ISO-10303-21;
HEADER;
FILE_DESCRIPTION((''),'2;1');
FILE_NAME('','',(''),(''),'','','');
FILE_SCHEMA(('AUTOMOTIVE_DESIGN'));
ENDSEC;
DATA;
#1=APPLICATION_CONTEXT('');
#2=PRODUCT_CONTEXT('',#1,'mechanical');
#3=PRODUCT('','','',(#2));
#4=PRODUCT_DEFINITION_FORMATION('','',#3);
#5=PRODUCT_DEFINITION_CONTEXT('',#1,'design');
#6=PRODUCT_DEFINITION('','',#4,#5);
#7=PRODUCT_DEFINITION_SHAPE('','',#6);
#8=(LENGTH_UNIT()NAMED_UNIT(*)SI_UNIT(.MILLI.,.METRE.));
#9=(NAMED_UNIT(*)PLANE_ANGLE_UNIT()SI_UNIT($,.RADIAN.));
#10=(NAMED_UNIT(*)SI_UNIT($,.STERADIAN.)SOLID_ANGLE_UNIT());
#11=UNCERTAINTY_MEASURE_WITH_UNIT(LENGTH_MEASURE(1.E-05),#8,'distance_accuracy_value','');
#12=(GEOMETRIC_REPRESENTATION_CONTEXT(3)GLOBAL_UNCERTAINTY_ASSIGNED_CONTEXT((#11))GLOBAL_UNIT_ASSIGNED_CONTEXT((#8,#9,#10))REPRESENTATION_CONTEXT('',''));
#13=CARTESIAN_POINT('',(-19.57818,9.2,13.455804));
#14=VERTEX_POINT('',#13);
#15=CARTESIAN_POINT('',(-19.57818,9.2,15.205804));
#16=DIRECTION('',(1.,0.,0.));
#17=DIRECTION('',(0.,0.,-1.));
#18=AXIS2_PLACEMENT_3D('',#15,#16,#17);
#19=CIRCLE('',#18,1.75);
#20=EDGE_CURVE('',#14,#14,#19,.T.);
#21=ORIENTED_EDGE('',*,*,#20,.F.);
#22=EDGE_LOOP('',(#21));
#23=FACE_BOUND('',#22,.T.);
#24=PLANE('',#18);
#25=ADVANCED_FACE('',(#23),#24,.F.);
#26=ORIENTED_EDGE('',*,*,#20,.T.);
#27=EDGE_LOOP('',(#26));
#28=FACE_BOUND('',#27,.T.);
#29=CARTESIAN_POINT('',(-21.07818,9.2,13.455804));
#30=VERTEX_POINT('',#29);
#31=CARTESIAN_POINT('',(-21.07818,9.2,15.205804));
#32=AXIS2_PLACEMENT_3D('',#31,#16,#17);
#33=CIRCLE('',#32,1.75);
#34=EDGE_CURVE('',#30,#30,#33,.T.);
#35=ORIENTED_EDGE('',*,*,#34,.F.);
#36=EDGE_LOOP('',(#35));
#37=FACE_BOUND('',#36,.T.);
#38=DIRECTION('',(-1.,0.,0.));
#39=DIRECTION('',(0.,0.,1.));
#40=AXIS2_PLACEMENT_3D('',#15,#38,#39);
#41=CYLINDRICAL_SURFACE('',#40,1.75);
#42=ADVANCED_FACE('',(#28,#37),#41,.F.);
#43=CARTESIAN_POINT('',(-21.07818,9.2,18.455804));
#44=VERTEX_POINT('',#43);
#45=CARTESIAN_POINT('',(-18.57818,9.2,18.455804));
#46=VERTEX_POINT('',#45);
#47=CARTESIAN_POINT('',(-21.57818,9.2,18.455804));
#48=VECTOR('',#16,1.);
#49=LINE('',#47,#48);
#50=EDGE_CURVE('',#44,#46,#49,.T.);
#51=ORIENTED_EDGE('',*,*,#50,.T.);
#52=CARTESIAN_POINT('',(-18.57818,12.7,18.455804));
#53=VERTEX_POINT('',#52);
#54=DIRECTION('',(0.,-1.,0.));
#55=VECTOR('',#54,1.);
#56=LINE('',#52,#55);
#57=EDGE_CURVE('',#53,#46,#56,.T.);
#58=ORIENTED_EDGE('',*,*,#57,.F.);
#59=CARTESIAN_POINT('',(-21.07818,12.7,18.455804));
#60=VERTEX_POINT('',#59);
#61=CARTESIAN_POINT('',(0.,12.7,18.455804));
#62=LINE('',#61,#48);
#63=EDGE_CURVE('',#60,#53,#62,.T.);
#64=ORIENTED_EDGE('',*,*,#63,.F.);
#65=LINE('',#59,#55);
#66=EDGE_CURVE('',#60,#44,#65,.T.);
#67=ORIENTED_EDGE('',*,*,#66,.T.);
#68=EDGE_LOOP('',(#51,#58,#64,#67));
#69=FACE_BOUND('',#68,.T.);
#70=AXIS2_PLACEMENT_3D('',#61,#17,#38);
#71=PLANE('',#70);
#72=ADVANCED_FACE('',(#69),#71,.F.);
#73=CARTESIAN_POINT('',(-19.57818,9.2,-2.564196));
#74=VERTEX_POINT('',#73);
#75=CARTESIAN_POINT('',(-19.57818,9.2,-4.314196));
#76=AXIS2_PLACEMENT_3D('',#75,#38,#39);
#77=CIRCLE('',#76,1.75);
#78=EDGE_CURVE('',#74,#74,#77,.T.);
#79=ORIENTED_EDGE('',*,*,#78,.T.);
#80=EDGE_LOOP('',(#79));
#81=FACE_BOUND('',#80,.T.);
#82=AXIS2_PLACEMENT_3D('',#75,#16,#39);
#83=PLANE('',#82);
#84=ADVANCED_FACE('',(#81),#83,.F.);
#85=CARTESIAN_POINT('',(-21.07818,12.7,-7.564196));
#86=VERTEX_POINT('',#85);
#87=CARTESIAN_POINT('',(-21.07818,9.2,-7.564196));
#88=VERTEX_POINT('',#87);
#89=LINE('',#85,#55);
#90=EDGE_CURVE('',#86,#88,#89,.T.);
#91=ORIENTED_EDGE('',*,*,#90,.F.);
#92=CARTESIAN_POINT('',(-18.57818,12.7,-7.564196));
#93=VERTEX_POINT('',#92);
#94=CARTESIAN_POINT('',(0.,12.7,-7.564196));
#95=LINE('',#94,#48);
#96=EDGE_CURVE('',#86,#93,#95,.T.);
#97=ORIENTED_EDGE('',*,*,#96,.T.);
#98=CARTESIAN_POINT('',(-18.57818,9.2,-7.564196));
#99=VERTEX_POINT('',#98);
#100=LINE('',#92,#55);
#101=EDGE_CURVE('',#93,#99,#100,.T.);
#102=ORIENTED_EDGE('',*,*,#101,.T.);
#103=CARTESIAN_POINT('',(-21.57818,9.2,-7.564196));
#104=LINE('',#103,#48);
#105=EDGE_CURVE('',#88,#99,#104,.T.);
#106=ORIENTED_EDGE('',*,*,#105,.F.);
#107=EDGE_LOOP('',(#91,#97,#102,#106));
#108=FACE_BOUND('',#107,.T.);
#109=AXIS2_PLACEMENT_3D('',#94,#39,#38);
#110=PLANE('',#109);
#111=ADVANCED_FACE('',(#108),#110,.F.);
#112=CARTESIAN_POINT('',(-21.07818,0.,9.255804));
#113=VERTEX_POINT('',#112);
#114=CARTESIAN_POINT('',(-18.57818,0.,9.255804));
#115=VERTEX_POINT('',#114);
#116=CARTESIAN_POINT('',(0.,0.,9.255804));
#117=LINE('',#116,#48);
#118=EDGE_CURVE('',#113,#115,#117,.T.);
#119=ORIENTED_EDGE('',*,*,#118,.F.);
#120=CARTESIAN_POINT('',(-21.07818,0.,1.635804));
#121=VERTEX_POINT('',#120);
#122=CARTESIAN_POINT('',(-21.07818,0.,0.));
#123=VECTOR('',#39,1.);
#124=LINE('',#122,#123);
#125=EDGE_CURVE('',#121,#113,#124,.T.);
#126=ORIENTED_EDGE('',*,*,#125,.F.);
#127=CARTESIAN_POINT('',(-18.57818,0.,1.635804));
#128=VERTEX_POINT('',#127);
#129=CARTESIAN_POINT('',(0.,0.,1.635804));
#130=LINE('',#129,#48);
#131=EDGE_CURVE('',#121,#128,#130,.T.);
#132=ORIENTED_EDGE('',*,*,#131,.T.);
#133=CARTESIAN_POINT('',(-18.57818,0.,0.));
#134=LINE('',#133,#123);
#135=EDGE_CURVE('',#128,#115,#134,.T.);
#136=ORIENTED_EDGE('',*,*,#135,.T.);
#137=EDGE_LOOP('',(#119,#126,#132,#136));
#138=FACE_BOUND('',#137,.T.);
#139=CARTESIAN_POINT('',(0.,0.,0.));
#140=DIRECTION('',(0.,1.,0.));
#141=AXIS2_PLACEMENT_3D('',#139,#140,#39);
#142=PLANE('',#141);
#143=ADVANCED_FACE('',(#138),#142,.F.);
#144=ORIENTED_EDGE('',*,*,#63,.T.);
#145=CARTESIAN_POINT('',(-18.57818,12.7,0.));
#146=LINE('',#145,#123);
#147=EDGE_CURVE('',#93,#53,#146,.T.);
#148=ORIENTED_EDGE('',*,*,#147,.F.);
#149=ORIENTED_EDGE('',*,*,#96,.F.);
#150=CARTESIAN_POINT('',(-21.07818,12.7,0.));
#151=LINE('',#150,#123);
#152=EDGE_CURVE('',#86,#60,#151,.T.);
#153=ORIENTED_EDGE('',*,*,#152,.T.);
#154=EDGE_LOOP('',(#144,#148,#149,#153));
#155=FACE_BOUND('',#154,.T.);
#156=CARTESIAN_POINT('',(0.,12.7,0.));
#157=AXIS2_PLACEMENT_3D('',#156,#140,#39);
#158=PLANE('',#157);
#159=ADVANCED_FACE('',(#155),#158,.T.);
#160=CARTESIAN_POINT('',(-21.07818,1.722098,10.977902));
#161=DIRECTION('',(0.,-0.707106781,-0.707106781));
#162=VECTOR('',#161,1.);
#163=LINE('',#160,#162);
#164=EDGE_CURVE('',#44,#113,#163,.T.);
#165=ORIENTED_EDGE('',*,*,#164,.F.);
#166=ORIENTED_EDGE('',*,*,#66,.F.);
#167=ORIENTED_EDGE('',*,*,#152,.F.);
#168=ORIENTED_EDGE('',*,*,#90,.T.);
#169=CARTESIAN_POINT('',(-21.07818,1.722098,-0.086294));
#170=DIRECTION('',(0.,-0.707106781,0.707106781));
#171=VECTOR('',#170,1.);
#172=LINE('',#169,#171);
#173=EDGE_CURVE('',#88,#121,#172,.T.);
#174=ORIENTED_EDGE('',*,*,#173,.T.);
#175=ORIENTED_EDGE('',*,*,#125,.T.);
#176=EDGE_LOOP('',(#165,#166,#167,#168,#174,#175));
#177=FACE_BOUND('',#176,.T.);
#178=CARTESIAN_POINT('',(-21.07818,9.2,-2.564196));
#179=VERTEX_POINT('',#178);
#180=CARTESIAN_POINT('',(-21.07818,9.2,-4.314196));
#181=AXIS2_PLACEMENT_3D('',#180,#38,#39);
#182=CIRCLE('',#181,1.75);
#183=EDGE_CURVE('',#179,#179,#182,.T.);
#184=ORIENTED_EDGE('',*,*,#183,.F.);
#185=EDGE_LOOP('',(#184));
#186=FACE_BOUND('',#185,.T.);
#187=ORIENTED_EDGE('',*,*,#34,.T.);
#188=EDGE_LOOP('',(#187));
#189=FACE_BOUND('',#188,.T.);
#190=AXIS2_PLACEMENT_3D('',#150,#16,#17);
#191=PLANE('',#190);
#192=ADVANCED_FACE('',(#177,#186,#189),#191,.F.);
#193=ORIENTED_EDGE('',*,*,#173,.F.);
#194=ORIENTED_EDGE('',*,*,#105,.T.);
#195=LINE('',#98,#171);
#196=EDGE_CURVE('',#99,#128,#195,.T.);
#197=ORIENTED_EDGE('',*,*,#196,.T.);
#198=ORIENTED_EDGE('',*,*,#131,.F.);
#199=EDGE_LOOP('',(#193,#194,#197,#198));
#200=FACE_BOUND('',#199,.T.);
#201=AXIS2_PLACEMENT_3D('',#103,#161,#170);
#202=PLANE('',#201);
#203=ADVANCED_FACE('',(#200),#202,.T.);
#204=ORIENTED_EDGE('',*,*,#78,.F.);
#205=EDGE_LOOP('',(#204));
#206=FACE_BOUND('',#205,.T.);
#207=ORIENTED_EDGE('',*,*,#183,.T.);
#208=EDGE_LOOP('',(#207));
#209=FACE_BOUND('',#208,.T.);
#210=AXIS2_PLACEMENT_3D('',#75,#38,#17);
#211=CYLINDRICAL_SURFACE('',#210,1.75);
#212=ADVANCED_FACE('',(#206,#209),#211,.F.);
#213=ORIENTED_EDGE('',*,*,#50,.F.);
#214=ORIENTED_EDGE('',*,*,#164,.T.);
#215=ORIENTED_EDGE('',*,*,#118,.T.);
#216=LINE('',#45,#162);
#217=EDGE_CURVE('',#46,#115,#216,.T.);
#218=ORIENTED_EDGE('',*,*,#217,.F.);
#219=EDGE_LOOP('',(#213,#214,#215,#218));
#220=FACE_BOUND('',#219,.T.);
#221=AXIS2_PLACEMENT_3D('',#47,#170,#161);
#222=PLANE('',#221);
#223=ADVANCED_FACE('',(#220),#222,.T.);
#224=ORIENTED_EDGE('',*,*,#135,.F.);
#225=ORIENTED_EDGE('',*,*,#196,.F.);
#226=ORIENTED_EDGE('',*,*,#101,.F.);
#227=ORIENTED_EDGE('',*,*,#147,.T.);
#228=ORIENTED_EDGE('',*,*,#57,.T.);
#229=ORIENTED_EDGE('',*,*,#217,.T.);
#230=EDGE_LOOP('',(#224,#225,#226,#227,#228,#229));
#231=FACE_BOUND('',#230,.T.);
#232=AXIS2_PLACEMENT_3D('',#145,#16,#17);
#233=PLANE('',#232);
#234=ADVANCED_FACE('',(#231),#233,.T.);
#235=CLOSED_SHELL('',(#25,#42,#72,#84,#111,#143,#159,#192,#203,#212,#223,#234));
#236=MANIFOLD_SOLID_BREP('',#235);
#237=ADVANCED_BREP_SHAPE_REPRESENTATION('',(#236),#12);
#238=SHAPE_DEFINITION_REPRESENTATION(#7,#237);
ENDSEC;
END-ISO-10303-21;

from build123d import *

# Parameters (mm, degrees)
STOCK_TEST_FINGER_MICHELLE_V2_1_START = -21.07817965
STOCK_TEST_FINGER_MICHELLE_V2_1_DEPTH = 2.5
CUT_EXTRUDE1_START                    = -1.5
SKETCH1_R                             = 1.75
CUT_EXTRUDE1_DEPTH                    = 1.5
SKETCH2_W                             = 20.99
SKETCH2_H                             = 12.7
CUT_EXTRUDE2_DEPTH                    = 23.542331171


# Read off the part's stored shape, not the designer's step: Stock-test_finger_michelle_V2-1
with BuildPart() as part:
    # Stock-test_finger_michelle_V2-1 outline → Stock-test_finger_michelle_V2-1 (new body)
    with BuildSketch(Plane.YZ.offset(STOCK_TEST_FINGER_MICHELLE_V2_1_START)):
        Polygon((0, -6.34419618), (9.2, -15.54419618), (12.7, -15.54419618), (12.7, 18.45580382), (9.2, 18.45580382), (0, 9.25580382), align=None)
    extrude(amount=STOCK_TEST_FINGER_MICHELLE_V2_1_DEPTH)

    # Sketch1 → Cut-Extrude1 (cut)
    with BuildSketch(Plane.ZY.offset(21.07817965).offset(CUT_EXTRUDE1_START)):
        with Locations(Location((-12.29419618, 9.2, 0), (0, 0, 180))):
            Circle(SKETCH1_R)
        with Locations(Location((15.20580382, 9.2, 0), (0, 0, 180))):
            Circle(SKETCH1_R)
    extrude(amount=CUT_EXTRUDE1_DEPTH, mode=Mode.SUBTRACT)

    # Sketch2 → Cut-Extrude2 (cut, through all)
    with BuildSketch(Plane.ZY.offset(21.07817965)):
        with Locations((-5.04919618, 6.35)):
            Rectangle(SKETCH2_W, SKETCH2_H)
    extrude(amount=-CUT_EXTRUDE2_DEPTH, mode=Mode.SUBTRACT)

    # Mirror1: part across plane


with BuildPart() as part_1:
    add(part.part)
    add(part.part.mirror(Plane(origin=(0, 0, 5.44580382), x_dir=(1, 0, 0), z_dir=(0, 0, -1))))


solid = part_1.part
